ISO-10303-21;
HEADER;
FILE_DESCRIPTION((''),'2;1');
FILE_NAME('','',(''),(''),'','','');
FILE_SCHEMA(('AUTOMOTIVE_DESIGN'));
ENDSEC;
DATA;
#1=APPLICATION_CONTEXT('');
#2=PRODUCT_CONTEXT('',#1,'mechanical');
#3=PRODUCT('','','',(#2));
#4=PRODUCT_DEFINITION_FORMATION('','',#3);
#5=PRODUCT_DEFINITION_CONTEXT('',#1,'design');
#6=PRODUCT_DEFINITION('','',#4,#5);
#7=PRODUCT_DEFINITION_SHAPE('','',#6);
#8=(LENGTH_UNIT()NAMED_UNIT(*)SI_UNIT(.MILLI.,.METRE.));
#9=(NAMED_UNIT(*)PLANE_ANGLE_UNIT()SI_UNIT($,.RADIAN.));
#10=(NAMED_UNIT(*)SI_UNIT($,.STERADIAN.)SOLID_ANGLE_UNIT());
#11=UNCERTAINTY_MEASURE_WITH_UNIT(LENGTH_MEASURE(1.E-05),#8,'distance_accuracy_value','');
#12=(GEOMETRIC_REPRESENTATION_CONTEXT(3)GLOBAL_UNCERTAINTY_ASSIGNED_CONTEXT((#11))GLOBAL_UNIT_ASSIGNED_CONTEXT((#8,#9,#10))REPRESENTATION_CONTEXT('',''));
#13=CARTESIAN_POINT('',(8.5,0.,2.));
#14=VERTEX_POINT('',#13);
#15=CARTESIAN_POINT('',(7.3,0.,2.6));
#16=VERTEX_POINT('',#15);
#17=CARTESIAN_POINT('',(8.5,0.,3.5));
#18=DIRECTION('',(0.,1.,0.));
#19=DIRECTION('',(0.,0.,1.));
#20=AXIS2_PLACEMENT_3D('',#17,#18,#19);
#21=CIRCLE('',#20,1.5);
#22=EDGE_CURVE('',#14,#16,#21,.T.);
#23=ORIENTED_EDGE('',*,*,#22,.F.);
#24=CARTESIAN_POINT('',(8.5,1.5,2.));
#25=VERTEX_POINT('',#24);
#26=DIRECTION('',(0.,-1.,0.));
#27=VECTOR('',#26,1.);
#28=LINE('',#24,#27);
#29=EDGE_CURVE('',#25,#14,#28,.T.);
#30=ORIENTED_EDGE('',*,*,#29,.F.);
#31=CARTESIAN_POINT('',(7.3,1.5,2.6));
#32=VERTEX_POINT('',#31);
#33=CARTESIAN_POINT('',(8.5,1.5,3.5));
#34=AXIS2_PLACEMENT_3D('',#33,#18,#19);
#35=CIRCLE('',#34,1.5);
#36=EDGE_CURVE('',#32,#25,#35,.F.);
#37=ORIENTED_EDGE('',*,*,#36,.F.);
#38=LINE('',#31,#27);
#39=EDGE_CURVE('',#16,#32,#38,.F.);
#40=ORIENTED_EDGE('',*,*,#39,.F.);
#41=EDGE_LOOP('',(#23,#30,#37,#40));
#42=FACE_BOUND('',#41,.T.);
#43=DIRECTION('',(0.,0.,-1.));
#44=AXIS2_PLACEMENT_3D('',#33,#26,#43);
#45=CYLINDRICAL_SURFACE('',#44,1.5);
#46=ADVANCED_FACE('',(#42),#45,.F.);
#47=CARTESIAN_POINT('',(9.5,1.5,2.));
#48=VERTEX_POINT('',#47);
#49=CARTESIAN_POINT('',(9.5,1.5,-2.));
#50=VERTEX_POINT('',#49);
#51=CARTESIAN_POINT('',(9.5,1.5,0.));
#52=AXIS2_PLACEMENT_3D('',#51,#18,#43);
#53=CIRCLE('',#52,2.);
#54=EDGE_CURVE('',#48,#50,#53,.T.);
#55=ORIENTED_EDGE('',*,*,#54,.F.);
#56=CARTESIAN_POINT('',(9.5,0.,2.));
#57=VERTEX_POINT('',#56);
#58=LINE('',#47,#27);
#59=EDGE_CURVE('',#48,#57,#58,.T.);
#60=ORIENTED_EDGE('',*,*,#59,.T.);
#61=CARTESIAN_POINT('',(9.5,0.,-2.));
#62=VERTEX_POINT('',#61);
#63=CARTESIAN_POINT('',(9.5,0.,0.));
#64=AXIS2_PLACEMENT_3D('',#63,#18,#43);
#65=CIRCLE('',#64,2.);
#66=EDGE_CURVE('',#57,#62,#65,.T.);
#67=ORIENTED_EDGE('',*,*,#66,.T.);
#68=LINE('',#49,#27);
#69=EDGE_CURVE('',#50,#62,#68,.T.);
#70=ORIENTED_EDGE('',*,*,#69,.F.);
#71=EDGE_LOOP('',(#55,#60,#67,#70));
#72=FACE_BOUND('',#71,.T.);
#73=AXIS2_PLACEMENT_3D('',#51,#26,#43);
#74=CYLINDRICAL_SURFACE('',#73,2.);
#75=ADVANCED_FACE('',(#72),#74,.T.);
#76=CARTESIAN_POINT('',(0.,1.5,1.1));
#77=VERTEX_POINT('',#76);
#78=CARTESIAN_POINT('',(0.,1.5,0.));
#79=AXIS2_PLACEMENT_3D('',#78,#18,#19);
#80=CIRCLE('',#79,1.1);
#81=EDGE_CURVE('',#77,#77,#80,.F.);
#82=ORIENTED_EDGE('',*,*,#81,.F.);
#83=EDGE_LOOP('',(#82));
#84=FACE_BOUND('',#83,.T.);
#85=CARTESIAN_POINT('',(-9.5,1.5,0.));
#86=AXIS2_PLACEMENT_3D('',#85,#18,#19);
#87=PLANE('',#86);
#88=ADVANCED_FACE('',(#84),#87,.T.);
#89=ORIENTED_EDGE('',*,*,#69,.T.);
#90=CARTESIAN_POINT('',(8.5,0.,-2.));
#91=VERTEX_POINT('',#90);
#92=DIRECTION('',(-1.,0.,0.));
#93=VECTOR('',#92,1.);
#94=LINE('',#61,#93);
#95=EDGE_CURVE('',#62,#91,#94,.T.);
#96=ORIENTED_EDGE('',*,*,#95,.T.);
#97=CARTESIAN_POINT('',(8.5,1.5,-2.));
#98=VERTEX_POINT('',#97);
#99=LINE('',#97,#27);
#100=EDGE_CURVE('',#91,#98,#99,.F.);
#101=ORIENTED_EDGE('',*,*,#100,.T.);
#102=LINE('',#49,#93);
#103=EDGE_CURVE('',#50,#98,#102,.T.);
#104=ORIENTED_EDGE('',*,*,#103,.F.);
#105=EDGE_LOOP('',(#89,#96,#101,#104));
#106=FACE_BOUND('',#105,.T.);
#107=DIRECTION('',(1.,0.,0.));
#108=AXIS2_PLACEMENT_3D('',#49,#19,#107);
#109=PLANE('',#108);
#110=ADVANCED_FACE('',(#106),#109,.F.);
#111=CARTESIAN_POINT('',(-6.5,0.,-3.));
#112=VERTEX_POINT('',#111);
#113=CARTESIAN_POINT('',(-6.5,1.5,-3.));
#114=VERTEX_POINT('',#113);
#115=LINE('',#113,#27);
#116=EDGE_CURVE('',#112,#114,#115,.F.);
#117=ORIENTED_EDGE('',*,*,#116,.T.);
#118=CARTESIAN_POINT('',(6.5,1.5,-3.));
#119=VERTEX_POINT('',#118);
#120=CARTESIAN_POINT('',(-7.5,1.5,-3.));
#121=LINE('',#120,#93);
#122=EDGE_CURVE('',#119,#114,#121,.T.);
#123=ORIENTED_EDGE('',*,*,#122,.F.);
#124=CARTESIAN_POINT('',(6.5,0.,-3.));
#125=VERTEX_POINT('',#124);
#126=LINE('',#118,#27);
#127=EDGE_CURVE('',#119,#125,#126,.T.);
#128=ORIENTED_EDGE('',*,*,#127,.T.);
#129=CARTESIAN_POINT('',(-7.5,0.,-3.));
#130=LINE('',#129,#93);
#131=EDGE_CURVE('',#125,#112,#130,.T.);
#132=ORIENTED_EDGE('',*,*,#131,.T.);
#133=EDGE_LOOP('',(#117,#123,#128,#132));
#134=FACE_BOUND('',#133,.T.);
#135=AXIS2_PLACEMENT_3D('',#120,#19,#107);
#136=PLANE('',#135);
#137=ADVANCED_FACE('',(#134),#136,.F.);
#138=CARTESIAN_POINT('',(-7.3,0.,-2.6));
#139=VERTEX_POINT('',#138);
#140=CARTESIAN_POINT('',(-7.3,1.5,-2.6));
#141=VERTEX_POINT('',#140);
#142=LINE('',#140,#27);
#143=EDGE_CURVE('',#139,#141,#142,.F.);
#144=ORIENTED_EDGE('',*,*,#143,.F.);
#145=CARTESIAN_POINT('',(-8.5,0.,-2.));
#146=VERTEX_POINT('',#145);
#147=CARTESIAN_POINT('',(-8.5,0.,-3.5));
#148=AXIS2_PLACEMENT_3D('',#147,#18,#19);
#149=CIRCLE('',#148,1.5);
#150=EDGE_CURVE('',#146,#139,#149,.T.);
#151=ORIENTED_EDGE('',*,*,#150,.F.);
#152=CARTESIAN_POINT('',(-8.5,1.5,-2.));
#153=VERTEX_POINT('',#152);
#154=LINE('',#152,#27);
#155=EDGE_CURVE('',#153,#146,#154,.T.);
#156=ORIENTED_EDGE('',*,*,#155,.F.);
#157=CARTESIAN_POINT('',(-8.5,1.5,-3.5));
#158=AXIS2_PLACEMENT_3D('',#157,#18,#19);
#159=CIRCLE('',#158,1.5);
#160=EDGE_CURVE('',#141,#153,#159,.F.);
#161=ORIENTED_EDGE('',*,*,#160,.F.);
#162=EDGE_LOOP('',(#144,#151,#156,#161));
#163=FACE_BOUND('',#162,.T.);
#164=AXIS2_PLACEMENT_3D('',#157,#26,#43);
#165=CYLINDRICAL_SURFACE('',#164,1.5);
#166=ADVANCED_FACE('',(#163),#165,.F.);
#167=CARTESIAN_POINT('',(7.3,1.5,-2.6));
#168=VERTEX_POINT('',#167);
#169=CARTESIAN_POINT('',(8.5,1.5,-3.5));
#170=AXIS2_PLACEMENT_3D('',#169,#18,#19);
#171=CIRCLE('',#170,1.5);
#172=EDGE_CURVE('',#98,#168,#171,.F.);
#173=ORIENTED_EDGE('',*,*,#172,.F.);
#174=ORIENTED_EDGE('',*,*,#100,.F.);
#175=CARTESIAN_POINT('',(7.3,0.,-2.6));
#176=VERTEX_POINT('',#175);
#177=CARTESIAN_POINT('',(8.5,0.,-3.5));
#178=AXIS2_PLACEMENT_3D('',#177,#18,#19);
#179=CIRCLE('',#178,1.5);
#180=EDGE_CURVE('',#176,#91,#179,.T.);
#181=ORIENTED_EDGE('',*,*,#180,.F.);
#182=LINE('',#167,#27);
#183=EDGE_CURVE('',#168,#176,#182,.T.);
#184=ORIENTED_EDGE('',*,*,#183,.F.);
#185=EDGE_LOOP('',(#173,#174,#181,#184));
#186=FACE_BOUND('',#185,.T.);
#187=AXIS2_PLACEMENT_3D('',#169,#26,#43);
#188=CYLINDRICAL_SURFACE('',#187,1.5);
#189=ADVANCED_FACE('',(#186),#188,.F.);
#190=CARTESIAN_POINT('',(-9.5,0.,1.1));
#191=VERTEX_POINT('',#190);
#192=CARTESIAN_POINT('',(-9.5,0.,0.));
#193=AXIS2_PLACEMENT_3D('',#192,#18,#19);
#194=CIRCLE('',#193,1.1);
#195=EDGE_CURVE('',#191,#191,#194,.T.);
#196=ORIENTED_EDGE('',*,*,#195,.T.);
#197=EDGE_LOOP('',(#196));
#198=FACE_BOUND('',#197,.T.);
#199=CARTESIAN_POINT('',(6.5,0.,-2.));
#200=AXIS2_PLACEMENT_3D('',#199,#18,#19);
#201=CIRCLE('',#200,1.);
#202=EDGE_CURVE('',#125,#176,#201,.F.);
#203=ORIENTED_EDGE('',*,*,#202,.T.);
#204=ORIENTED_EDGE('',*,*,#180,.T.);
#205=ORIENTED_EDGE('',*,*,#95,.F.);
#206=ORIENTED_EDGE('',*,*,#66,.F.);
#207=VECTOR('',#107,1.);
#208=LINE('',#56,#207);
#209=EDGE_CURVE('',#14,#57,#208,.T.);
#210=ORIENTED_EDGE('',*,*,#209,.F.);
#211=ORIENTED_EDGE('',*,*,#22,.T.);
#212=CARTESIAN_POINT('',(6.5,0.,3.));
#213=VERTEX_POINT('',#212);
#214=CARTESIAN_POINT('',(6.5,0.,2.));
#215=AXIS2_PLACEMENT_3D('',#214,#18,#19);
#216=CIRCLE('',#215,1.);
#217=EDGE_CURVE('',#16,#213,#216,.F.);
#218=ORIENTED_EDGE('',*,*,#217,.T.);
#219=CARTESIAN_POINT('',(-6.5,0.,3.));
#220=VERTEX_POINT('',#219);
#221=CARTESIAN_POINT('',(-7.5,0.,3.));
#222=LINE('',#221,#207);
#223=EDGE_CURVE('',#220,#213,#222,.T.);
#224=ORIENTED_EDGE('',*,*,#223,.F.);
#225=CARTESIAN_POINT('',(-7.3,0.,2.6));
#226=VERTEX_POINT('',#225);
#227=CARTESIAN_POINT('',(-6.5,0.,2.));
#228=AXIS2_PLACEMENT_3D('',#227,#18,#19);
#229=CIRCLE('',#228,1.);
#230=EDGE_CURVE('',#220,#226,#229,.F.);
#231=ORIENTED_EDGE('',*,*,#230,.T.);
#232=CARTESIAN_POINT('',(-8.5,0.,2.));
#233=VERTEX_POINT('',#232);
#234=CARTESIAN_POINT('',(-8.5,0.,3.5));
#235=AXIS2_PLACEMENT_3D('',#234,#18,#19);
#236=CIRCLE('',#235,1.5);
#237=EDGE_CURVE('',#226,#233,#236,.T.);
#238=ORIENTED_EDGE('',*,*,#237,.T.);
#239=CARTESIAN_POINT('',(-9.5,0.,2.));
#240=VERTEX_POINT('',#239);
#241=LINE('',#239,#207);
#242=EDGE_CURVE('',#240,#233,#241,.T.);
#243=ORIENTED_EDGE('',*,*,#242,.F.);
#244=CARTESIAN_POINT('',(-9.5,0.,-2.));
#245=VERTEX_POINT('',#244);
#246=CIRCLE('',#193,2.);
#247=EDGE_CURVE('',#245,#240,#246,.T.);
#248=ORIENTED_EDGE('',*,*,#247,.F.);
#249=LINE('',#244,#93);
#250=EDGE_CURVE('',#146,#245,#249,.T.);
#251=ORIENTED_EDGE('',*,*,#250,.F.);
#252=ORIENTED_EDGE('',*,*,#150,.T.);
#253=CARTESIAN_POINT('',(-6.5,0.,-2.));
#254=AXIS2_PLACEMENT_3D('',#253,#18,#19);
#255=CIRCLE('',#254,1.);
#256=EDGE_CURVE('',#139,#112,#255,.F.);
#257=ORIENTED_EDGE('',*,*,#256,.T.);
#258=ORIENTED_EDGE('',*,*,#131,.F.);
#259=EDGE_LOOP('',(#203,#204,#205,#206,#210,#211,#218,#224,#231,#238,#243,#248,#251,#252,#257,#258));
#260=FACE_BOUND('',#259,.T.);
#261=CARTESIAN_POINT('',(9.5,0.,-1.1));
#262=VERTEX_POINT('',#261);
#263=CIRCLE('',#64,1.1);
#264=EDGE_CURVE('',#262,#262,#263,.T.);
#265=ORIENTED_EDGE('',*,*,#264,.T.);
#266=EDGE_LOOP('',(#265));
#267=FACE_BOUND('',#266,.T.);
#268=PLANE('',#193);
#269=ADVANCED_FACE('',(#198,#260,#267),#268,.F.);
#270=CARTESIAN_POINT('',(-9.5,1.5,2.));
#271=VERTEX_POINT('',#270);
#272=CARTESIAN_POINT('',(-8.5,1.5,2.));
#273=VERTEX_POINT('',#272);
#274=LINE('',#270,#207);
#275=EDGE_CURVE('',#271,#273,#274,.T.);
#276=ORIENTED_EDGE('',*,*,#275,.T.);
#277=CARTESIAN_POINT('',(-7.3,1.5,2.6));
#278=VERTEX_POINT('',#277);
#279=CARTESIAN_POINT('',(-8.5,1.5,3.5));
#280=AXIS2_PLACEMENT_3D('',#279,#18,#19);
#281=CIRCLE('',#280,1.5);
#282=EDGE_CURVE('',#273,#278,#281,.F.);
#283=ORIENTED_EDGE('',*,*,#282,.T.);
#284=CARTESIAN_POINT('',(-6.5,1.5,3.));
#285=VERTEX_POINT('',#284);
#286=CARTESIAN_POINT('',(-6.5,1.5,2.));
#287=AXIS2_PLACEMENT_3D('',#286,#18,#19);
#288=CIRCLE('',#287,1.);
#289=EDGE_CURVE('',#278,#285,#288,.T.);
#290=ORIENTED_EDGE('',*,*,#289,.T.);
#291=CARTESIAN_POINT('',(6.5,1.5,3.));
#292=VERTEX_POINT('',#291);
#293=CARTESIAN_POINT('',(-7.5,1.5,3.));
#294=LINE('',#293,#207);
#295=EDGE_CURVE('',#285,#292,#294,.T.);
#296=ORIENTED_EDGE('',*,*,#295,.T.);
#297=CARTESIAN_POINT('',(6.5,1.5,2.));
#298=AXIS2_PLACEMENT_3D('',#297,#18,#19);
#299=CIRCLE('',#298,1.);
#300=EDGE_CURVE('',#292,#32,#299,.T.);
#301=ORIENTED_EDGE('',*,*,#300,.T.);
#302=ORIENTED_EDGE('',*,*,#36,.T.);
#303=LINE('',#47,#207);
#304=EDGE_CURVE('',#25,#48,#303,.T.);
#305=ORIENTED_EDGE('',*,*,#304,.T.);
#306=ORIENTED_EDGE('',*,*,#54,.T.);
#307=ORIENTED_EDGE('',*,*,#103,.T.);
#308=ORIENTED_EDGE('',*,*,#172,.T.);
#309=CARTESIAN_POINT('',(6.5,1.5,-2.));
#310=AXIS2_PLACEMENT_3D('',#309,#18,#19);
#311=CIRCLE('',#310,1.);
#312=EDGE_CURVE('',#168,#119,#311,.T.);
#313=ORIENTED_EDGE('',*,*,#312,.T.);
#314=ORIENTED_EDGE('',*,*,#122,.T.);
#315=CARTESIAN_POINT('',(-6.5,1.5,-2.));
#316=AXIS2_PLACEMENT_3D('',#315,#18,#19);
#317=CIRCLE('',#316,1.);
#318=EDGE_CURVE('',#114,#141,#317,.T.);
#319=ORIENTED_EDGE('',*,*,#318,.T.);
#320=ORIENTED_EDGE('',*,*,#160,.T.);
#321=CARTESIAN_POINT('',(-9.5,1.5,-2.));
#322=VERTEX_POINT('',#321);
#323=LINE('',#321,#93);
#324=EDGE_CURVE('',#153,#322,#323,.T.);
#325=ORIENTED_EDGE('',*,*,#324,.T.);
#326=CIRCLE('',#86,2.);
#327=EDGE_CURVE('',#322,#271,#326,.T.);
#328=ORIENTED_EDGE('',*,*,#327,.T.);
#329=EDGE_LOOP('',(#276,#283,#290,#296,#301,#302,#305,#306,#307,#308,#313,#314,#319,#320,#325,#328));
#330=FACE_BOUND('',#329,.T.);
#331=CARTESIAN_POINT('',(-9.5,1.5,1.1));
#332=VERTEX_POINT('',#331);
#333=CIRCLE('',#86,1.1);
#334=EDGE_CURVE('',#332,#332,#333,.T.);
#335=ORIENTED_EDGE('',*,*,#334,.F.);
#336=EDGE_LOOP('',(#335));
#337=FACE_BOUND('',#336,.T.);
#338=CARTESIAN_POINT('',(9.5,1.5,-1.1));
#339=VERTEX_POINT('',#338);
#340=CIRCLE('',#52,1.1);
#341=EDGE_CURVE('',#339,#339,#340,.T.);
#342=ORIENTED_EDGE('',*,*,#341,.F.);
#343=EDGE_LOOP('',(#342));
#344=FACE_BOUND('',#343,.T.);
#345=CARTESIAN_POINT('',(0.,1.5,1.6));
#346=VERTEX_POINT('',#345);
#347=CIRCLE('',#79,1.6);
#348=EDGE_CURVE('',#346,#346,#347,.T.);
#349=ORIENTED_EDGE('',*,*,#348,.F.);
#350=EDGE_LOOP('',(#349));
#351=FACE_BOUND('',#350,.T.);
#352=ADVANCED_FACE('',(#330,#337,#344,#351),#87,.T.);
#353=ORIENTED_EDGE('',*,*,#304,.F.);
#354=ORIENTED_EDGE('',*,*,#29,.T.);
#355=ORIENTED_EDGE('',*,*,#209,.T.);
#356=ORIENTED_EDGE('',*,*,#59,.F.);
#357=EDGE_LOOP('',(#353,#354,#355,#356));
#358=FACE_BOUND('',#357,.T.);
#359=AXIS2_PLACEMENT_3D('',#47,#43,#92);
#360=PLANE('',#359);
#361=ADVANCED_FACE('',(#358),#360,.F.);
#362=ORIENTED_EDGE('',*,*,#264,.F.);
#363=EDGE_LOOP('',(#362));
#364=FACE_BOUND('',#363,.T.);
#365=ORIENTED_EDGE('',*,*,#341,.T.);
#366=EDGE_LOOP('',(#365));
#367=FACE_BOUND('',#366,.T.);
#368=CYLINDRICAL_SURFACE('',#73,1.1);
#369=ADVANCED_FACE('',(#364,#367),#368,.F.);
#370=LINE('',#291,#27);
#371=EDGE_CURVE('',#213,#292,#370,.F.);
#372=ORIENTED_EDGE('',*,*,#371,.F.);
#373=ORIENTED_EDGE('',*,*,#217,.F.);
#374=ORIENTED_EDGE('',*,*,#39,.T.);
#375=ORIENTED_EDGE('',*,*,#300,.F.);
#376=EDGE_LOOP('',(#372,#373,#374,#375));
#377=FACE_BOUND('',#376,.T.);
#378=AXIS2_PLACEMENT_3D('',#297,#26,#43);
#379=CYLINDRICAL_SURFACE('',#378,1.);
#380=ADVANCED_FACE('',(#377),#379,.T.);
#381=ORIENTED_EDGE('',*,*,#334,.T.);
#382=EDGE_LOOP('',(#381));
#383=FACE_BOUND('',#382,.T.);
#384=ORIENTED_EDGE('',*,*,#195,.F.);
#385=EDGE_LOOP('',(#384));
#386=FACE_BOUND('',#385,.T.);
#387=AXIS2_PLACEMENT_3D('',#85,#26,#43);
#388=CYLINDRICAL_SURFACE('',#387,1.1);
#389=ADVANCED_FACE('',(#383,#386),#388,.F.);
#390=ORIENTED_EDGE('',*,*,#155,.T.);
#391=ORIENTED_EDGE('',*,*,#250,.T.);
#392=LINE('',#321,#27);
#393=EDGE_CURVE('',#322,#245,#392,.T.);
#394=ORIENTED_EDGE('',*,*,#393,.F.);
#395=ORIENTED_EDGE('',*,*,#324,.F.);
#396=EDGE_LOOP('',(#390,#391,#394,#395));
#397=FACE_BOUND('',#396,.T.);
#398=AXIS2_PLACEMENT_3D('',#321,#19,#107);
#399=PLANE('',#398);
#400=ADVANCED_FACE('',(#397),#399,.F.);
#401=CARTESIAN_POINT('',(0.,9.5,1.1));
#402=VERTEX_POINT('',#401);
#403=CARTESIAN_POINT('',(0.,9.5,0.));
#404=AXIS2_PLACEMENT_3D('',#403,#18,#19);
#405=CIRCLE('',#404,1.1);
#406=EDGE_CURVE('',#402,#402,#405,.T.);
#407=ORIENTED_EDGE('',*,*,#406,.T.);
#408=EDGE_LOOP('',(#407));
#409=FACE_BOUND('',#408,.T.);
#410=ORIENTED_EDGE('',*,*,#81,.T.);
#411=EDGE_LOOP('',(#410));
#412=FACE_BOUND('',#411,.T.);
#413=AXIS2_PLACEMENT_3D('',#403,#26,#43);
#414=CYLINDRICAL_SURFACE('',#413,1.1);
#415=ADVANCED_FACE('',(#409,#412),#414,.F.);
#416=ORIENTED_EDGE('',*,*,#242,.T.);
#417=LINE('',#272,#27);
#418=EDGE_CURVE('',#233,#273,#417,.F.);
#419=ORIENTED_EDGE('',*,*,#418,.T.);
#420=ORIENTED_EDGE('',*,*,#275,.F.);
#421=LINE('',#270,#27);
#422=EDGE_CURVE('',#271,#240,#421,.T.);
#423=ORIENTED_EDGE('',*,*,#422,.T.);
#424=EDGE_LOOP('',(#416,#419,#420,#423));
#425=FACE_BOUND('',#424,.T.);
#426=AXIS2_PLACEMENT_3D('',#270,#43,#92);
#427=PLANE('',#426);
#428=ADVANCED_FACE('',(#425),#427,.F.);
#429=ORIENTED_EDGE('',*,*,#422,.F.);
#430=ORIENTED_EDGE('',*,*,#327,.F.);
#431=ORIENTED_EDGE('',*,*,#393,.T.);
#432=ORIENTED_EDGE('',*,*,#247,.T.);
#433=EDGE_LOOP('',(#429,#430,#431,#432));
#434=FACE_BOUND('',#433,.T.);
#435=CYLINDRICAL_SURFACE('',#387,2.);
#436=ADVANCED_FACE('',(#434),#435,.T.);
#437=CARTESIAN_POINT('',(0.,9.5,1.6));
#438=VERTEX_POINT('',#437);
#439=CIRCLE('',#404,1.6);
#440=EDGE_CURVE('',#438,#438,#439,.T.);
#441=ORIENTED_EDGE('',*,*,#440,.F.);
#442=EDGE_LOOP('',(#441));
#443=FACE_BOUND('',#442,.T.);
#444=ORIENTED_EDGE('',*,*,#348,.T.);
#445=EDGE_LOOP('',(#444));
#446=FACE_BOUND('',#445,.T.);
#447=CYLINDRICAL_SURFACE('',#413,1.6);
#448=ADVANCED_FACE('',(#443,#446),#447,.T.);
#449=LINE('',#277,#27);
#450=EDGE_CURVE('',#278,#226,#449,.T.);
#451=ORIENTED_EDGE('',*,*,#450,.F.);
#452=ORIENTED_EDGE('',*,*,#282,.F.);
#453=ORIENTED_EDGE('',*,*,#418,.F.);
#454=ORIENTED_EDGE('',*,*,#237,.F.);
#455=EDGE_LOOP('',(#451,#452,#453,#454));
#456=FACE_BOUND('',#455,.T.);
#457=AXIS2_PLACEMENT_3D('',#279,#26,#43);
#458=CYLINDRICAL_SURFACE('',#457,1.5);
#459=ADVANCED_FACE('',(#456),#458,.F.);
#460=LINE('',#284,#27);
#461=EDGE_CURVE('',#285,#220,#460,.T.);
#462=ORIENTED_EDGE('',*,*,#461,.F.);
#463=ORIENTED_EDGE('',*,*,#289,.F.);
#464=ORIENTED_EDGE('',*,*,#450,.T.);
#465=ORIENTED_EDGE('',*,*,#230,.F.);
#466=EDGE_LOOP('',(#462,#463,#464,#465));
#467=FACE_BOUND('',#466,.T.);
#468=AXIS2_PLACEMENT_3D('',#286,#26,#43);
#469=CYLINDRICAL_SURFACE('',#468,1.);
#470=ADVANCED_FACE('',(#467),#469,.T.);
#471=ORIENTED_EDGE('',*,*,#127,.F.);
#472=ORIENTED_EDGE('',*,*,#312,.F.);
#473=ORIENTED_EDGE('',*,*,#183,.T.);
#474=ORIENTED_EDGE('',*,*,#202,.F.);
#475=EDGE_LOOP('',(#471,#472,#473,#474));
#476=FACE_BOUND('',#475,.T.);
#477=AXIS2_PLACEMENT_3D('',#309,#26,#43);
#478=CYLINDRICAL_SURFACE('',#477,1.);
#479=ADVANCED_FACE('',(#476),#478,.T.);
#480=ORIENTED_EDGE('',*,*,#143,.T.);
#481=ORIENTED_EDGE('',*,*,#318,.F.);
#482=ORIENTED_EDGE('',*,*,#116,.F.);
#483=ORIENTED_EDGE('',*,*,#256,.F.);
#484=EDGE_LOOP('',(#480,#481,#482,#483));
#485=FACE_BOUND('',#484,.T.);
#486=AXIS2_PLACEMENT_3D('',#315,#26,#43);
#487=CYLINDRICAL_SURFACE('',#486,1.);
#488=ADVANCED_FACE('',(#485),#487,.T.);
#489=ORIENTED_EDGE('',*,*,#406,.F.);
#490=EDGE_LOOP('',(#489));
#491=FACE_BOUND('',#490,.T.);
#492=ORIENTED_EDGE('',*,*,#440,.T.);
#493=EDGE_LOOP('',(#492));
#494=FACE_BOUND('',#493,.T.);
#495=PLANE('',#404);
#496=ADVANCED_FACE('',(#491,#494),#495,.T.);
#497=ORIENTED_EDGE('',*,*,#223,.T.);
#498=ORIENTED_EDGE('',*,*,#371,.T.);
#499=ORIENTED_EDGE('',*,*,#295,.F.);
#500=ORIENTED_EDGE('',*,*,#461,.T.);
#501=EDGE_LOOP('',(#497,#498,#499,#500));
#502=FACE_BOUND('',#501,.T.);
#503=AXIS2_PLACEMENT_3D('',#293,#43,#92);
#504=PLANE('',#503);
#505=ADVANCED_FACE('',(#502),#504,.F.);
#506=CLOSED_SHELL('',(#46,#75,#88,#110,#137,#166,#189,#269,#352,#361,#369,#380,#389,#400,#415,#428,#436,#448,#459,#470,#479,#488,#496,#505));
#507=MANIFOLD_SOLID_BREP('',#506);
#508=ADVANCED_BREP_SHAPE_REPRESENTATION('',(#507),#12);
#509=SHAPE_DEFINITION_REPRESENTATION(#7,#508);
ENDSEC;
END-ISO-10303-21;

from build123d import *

# Parameters (mm, degrees)
SKETCH1_R           = 1.1
BOSS_EXTRUDE1_DEPTH = 1.5
FILLET1_R           = 1
FILLET2_R           = 1.5
SKETCH2_R           = 1.6
SKETCH2_R_2         = 1.1
BOSS_EXTRUDE2_DEPTH = 8


with BuildPart() as part:
    # Sketch1 → Boss-Extrude1 (new body)
    with BuildSketch(Plane(origin=(0, 0, 0), x_dir=(1, 0, 0), z_dir=(0, 1, 0))):
        with BuildLine():
            Line((-9.5, 2), (-7.5, 2))
            Line((-7.5, 2), (-7.5, 3))
            Line((-7.5, 3), (7.5, 3))
            Line((7.5, 3), (7.5, 2))
            Line((7.5, 2), (9.5, 2))
            ThreePointArc((9.5, 2), (11.5, 0), (9.5, -2))
            Line((9.5, -2), (7.5, -2))
            Line((7.5, -2), (7.5, -3))
            Line((7.5, -3), (-7.5, -3))
            Line((-7.5, -3), (-7.5, -2))
            Line((-7.5, -2), (-9.5, -2))
            ThreePointArc((-9.5, -2), (-11.5, 0), (-9.5, 2))
        make_face()
        with Locations(Location((-9.5, 0, 0), (0, 0, 270))):
            Circle(SKETCH1_R, mode=Mode.SUBTRACT)
        with Locations(Location((9.5, 0, 0), (0, 0, 90))):
            Circle(SKETCH1_R, mode=Mode.SUBTRACT)
    extrude(amount=BOSS_EXTRUDE1_DEPTH)

    # Fillet1
    fillet1_edges = [part.edges().sort_by_distance(p)[0] for p in [
        (7.5, 0.75, 3),
        (7.5, 0.75, -3),
        (-7.5, 0.75, -3),
        (-7.5, 0.75, 3),
    ]]
    fillet(fillet1_edges, radius=FILLET1_R - 0.0001)  # a hair under: the kernel refuses the full size

    # Fillet2
    fillet2_edges = [part.edges().sort_by_distance(p)[0] for p in [
        (7.5, 0.75, -2),
        (7.5, 0.75, 2),
        (-7.5, 0.75, 2),
        (-7.5, 0.75, -2),
    ]]
    fillet(fillet2_edges, radius=FILLET2_R)

    # Sketch2 → Boss-Extrude2 (add)
    with BuildSketch(Plane(origin=(0, 1.5, 0), x_dir=(1, 0, 0), z_dir=(0, 1, 0))):
        with Locations(Location((0, 0, 0), (0, 0, 270))):
            Circle(SKETCH2_R)
        with Locations(Location((0, 0, 0), (0, 0, 270))):
            Circle(SKETCH2_R_2, mode=Mode.SUBTRACT)
    extrude(amount=BOSS_EXTRUDE2_DEPTH)


solid = part.part
